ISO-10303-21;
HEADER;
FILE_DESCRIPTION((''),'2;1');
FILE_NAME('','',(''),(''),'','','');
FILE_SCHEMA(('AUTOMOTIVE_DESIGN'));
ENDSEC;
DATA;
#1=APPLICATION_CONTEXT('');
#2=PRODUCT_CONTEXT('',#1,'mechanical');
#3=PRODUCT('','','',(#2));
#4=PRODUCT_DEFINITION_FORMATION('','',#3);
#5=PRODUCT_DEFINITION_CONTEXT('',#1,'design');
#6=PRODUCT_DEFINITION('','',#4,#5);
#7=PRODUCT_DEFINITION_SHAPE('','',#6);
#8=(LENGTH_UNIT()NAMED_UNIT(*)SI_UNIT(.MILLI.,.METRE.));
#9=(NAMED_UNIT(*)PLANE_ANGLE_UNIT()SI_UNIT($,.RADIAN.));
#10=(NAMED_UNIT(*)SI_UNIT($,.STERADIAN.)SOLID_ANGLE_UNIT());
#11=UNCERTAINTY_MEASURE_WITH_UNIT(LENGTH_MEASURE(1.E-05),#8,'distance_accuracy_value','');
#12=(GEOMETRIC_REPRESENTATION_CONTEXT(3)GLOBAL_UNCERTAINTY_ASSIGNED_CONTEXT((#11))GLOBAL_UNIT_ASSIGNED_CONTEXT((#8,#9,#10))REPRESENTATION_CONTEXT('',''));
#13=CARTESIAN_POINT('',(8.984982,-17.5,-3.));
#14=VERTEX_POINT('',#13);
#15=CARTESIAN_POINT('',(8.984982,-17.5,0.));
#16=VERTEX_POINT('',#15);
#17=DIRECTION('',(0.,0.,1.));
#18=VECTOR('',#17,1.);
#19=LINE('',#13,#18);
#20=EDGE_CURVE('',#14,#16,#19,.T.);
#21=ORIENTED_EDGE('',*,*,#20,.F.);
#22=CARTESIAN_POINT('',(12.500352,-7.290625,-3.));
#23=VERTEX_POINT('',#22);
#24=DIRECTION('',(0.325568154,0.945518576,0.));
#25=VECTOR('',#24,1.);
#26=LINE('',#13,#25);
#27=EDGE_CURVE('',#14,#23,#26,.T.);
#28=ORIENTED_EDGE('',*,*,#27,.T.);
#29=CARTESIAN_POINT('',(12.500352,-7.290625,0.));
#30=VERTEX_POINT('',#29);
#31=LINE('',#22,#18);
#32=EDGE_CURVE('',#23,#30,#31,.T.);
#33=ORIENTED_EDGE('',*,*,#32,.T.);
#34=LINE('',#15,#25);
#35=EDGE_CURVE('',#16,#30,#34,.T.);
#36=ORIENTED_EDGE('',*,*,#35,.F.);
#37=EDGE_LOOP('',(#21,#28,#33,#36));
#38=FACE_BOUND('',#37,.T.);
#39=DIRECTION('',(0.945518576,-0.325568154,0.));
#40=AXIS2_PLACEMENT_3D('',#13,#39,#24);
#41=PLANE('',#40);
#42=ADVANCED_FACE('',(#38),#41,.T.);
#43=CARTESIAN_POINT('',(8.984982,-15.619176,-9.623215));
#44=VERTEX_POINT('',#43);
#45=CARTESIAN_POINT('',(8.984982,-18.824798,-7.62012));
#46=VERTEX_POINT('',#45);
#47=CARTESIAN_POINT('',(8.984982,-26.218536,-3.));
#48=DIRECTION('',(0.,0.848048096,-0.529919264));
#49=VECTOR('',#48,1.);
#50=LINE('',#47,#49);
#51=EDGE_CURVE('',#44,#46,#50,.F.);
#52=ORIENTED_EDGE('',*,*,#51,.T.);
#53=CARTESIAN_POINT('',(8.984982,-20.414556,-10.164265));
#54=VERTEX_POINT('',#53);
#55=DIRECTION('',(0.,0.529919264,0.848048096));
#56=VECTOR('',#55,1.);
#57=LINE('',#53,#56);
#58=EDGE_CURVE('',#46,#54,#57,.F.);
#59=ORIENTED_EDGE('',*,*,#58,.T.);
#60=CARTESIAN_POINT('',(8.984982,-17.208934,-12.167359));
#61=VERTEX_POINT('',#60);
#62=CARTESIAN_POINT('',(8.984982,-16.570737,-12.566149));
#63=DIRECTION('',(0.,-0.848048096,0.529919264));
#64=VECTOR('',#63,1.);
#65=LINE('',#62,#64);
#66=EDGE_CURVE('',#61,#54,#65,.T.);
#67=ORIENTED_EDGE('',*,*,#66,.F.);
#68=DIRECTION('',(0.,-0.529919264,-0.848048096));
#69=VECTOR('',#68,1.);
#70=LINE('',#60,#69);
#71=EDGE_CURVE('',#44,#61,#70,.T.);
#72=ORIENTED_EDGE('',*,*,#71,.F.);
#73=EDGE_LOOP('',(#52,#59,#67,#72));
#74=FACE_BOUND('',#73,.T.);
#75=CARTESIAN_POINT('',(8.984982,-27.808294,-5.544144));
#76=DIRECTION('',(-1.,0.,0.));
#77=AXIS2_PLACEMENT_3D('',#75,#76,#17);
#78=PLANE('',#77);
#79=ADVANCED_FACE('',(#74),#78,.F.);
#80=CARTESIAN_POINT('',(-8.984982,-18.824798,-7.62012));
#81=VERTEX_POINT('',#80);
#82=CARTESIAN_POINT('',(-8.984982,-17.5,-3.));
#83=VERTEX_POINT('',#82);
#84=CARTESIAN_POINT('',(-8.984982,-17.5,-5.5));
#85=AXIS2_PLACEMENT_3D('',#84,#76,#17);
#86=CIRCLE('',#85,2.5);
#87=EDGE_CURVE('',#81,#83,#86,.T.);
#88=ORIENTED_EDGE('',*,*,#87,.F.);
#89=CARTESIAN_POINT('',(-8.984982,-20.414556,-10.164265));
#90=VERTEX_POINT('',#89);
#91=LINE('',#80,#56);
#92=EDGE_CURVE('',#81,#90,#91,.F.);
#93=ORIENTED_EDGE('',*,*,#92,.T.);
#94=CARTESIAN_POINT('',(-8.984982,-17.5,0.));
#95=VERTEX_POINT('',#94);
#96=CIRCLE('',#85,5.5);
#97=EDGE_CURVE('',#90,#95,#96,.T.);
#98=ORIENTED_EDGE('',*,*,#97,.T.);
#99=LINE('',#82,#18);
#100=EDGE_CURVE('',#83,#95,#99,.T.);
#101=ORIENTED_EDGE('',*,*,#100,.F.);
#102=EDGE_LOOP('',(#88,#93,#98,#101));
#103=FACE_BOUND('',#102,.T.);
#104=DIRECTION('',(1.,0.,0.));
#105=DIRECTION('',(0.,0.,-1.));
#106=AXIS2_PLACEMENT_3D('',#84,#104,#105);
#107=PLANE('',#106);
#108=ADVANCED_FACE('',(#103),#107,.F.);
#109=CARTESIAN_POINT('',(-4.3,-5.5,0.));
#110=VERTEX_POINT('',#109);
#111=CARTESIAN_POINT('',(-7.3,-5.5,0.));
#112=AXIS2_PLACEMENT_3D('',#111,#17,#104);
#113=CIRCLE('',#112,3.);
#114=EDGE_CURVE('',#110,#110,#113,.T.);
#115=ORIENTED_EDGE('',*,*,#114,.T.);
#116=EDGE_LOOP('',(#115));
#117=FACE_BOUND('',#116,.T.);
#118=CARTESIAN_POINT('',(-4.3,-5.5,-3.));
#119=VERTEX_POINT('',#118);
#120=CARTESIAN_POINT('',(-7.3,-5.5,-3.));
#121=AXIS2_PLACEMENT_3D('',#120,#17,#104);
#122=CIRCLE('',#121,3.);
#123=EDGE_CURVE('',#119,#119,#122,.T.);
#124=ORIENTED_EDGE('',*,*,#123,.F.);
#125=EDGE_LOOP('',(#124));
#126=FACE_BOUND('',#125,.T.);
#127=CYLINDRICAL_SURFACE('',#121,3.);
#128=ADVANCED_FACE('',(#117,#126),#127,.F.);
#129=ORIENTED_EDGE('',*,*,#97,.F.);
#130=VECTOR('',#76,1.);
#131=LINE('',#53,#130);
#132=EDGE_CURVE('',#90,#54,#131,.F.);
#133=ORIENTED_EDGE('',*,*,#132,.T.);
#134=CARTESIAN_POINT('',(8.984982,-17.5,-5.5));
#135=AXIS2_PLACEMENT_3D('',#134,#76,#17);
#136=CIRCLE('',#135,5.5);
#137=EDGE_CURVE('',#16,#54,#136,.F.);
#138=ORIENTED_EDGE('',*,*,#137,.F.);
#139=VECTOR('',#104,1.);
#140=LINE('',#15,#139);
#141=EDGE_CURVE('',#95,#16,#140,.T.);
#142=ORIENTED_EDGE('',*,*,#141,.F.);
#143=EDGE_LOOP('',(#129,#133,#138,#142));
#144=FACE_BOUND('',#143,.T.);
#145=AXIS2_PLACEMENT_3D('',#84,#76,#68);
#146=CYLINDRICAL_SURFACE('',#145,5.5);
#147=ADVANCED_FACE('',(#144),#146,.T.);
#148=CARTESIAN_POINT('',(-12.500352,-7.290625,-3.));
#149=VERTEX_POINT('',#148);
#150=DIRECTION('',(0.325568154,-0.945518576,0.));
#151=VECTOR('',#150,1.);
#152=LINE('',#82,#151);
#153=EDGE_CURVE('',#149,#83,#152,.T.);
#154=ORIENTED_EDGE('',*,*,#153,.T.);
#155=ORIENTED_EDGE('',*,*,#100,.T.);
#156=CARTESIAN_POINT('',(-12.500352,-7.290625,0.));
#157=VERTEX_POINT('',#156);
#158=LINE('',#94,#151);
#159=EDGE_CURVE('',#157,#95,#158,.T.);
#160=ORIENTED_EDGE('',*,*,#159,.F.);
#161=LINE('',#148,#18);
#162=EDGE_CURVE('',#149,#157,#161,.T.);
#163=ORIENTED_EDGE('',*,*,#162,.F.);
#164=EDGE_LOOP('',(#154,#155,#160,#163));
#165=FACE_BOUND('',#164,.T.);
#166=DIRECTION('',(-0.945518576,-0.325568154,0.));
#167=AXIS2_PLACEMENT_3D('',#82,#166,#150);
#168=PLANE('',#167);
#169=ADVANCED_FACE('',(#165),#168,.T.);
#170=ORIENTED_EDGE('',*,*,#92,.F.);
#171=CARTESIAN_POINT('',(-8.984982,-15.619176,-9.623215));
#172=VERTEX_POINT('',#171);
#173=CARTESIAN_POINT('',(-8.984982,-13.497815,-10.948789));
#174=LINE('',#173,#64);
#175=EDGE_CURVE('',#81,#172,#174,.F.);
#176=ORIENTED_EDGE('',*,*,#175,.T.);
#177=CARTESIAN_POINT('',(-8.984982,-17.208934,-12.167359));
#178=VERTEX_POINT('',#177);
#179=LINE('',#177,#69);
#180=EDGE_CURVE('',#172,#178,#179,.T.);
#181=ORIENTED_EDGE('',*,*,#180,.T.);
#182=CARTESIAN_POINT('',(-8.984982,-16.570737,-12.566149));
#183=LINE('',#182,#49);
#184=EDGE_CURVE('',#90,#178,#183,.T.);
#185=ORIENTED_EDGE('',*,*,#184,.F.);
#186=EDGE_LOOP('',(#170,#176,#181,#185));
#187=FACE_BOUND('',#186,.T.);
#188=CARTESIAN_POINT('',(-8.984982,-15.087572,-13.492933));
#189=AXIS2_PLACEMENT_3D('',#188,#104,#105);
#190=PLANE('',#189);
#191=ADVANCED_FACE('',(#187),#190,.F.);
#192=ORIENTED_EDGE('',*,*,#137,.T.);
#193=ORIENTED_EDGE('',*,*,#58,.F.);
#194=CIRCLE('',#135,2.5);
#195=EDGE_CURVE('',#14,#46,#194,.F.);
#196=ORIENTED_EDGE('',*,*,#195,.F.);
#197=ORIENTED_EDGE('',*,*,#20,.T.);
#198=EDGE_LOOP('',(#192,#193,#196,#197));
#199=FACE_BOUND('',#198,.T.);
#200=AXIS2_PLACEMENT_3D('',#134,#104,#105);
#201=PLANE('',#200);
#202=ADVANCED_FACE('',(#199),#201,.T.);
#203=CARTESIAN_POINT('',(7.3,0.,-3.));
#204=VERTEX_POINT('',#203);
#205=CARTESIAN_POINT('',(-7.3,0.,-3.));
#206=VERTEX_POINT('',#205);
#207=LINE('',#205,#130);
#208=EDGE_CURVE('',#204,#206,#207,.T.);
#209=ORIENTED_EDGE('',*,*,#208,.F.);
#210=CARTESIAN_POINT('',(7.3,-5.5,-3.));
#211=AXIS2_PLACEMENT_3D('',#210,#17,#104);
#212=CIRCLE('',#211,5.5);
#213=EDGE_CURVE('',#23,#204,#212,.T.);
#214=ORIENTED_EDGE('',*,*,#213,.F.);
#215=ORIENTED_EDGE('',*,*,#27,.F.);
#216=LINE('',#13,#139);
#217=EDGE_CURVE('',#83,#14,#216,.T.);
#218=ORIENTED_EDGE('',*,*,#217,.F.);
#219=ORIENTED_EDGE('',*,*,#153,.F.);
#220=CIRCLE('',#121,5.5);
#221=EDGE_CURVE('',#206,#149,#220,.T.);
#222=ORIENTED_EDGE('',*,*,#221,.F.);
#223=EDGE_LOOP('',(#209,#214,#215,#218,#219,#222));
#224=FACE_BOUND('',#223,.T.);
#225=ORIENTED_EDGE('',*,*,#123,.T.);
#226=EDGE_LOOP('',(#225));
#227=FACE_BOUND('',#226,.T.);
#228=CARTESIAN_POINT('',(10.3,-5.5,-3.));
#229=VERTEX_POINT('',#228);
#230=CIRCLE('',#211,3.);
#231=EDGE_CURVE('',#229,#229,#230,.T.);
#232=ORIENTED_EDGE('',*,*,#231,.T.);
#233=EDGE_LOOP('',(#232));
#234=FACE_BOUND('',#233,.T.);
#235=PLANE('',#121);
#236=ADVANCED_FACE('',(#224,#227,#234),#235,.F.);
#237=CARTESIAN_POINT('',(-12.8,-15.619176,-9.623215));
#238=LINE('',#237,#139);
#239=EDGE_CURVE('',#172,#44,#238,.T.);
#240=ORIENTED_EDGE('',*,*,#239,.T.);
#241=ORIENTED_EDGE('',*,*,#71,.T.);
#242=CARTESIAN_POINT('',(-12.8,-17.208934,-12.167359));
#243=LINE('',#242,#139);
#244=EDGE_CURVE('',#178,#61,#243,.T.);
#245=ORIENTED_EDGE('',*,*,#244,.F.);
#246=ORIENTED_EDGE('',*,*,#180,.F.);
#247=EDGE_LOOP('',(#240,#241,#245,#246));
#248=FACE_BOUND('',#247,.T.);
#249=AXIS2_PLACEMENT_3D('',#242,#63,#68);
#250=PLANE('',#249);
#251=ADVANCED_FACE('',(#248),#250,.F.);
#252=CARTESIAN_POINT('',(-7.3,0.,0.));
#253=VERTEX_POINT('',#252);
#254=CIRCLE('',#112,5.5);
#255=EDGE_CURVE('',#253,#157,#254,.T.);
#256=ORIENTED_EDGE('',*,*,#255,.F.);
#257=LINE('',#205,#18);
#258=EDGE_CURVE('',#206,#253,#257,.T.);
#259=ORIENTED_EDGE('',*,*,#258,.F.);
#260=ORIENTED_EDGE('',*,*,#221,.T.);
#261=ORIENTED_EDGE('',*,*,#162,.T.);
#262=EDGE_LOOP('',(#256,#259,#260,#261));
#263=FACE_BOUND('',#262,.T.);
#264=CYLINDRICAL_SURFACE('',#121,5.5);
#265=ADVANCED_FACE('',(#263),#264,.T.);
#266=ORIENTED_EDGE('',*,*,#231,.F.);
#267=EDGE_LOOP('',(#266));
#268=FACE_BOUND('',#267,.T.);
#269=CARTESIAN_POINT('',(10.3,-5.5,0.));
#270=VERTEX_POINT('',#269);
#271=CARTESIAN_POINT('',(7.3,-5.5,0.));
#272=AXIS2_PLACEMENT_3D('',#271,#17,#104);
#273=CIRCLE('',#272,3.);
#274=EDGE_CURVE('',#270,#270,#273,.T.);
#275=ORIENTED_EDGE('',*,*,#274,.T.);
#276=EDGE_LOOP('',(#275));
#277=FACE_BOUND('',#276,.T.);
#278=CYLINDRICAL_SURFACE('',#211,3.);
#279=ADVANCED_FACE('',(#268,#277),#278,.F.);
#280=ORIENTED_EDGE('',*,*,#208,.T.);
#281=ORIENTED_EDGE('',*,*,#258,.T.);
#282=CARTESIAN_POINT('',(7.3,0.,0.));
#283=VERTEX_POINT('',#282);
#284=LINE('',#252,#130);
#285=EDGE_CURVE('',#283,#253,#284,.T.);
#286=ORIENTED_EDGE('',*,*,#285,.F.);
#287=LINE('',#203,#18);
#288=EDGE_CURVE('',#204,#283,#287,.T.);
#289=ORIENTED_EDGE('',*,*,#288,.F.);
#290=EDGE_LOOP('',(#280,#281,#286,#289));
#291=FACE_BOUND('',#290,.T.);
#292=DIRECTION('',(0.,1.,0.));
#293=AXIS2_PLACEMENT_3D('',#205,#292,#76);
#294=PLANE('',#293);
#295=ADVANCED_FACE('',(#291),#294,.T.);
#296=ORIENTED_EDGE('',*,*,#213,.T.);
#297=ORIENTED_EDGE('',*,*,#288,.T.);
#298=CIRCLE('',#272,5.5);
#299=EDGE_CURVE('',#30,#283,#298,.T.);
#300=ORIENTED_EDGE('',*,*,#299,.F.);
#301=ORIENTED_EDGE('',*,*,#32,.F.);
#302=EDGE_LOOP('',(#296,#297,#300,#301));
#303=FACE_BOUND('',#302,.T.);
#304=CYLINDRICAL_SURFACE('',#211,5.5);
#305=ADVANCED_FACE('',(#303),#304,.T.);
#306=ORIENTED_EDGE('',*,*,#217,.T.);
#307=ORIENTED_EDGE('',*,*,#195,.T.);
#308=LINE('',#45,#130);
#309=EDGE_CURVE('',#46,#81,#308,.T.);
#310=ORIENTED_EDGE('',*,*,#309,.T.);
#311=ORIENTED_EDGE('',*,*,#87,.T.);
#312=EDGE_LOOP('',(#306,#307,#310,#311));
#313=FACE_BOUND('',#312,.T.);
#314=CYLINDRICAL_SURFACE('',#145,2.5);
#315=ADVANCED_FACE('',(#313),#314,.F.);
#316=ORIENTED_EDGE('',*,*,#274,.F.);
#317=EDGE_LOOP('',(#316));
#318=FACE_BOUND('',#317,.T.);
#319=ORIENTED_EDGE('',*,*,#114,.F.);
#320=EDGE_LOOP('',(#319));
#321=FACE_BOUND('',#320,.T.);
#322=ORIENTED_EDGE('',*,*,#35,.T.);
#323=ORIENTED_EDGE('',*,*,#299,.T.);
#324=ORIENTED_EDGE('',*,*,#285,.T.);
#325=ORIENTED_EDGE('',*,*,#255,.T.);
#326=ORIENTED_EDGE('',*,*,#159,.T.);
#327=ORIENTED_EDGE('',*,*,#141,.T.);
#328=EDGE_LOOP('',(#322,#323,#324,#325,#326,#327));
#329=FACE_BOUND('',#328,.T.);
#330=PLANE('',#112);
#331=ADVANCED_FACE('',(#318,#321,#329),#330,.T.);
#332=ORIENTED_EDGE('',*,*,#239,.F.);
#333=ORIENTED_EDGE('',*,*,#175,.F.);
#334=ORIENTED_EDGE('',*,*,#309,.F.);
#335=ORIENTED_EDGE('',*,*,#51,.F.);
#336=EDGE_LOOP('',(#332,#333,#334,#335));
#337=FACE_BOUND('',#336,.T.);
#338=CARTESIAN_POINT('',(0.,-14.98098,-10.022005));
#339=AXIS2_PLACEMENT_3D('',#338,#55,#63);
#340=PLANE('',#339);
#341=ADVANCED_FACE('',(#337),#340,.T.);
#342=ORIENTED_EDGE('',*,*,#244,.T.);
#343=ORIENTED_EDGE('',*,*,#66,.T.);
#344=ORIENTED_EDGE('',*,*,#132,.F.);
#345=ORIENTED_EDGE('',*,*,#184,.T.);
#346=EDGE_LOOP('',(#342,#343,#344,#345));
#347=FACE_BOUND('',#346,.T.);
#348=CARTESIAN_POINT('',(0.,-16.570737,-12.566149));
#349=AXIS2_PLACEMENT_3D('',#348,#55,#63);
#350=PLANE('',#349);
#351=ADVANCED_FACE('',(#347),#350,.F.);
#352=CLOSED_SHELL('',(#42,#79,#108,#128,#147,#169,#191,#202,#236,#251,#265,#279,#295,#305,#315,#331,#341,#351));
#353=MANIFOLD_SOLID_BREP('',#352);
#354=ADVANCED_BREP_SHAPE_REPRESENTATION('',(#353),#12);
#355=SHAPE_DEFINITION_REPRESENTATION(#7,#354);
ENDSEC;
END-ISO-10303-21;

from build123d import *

# Parameters (mm, degrees)
SCHIZZO2_R               = 3
BASE_FLANGIA1_DEPTH      = 3
BORDO_FLANGIA3_DEPTH     = 17.969964774
TAGLIO_ESTRUSIONE1_DEPTH = 35.433191913


# Sheet-metal steps are written as plain solids
with BuildPart() as part:
    # Schizzo2 → Base-Flangia1 (new body)
    with BuildSketch(Plane.XY):
        with BuildLine():
            Line((-7.3, 0), (7.3, 0))
            ThreePointArc((7.3, 0), (11.777635351, -2.306133744), (12.500352166, -7.29062485))
            Line((12.500352166, -7.29062485), (8.984982387, -17.5))
            Line((8.984982387, -17.5), (-8.984982387, -17.5))
            Line((-8.984982387, -17.5), (-12.500352166, -7.29062485))
            ThreePointArc((-12.500352166, -7.29062485), (-11.777635351, -2.306133744), (-7.3, 0))
        make_face()
        with Locations((-7.3, -5.5)):
            Circle(SCHIZZO2_R, mode=Mode.SUBTRACT)
        with Locations((7.3, -5.5)):
            Circle(SCHIZZO2_R, mode=Mode.SUBTRACT)
    extrude(amount=-BASE_FLANGIA1_DEPTH)

    # Bordo-Flangia3 section (across the edge) → Bordo-Flangia3 (add)
    with BuildSketch(Plane(origin=(8.984982387, -26.21853611, -3), x_dir=(0, 0.529919264233206, 0.8480480961564254), z_dir=(-1, 0, 0))):
        with BuildLine():
            Line((-3, 8.71853611), (-3, 15))
            Line((-3, 15), (0, 15))
            Line((0, 15), (0, 8.71853611))
            ThreePointArc((0, 8.71853611), (1.81090661, 6.31538187), (4.62012024, 7.393737949))
            Line((4.62012024, 7.393737949), (7.164264529, 5.803980156))
            ThreePointArc((7.164264529, 5.803980156), (0.983994543, 3.431596782), (-3, 8.71853611))
        make_face()
    extrude(amount=BORDO_FLANGIA3_DEPTH)

    # Schizzo25 → Taglio-Estrusione1 (cut, through all)
    with BuildSketch(Plane(origin=(8.984982387, 0, 0), x_dir=(0, 0, -1), z_dir=(1, 0, 0))):
        Polygon((9.623215059, -15.619176357), (10.948788963, -13.497814667), (13.492933252, -15.08757246), (12.167359348, -17.20893415), align=None)
    extrude(amount=-TAGLIO_ESTRUSIONE1_DEPTH, mode=Mode.SUBTRACT)


solid = part.part
